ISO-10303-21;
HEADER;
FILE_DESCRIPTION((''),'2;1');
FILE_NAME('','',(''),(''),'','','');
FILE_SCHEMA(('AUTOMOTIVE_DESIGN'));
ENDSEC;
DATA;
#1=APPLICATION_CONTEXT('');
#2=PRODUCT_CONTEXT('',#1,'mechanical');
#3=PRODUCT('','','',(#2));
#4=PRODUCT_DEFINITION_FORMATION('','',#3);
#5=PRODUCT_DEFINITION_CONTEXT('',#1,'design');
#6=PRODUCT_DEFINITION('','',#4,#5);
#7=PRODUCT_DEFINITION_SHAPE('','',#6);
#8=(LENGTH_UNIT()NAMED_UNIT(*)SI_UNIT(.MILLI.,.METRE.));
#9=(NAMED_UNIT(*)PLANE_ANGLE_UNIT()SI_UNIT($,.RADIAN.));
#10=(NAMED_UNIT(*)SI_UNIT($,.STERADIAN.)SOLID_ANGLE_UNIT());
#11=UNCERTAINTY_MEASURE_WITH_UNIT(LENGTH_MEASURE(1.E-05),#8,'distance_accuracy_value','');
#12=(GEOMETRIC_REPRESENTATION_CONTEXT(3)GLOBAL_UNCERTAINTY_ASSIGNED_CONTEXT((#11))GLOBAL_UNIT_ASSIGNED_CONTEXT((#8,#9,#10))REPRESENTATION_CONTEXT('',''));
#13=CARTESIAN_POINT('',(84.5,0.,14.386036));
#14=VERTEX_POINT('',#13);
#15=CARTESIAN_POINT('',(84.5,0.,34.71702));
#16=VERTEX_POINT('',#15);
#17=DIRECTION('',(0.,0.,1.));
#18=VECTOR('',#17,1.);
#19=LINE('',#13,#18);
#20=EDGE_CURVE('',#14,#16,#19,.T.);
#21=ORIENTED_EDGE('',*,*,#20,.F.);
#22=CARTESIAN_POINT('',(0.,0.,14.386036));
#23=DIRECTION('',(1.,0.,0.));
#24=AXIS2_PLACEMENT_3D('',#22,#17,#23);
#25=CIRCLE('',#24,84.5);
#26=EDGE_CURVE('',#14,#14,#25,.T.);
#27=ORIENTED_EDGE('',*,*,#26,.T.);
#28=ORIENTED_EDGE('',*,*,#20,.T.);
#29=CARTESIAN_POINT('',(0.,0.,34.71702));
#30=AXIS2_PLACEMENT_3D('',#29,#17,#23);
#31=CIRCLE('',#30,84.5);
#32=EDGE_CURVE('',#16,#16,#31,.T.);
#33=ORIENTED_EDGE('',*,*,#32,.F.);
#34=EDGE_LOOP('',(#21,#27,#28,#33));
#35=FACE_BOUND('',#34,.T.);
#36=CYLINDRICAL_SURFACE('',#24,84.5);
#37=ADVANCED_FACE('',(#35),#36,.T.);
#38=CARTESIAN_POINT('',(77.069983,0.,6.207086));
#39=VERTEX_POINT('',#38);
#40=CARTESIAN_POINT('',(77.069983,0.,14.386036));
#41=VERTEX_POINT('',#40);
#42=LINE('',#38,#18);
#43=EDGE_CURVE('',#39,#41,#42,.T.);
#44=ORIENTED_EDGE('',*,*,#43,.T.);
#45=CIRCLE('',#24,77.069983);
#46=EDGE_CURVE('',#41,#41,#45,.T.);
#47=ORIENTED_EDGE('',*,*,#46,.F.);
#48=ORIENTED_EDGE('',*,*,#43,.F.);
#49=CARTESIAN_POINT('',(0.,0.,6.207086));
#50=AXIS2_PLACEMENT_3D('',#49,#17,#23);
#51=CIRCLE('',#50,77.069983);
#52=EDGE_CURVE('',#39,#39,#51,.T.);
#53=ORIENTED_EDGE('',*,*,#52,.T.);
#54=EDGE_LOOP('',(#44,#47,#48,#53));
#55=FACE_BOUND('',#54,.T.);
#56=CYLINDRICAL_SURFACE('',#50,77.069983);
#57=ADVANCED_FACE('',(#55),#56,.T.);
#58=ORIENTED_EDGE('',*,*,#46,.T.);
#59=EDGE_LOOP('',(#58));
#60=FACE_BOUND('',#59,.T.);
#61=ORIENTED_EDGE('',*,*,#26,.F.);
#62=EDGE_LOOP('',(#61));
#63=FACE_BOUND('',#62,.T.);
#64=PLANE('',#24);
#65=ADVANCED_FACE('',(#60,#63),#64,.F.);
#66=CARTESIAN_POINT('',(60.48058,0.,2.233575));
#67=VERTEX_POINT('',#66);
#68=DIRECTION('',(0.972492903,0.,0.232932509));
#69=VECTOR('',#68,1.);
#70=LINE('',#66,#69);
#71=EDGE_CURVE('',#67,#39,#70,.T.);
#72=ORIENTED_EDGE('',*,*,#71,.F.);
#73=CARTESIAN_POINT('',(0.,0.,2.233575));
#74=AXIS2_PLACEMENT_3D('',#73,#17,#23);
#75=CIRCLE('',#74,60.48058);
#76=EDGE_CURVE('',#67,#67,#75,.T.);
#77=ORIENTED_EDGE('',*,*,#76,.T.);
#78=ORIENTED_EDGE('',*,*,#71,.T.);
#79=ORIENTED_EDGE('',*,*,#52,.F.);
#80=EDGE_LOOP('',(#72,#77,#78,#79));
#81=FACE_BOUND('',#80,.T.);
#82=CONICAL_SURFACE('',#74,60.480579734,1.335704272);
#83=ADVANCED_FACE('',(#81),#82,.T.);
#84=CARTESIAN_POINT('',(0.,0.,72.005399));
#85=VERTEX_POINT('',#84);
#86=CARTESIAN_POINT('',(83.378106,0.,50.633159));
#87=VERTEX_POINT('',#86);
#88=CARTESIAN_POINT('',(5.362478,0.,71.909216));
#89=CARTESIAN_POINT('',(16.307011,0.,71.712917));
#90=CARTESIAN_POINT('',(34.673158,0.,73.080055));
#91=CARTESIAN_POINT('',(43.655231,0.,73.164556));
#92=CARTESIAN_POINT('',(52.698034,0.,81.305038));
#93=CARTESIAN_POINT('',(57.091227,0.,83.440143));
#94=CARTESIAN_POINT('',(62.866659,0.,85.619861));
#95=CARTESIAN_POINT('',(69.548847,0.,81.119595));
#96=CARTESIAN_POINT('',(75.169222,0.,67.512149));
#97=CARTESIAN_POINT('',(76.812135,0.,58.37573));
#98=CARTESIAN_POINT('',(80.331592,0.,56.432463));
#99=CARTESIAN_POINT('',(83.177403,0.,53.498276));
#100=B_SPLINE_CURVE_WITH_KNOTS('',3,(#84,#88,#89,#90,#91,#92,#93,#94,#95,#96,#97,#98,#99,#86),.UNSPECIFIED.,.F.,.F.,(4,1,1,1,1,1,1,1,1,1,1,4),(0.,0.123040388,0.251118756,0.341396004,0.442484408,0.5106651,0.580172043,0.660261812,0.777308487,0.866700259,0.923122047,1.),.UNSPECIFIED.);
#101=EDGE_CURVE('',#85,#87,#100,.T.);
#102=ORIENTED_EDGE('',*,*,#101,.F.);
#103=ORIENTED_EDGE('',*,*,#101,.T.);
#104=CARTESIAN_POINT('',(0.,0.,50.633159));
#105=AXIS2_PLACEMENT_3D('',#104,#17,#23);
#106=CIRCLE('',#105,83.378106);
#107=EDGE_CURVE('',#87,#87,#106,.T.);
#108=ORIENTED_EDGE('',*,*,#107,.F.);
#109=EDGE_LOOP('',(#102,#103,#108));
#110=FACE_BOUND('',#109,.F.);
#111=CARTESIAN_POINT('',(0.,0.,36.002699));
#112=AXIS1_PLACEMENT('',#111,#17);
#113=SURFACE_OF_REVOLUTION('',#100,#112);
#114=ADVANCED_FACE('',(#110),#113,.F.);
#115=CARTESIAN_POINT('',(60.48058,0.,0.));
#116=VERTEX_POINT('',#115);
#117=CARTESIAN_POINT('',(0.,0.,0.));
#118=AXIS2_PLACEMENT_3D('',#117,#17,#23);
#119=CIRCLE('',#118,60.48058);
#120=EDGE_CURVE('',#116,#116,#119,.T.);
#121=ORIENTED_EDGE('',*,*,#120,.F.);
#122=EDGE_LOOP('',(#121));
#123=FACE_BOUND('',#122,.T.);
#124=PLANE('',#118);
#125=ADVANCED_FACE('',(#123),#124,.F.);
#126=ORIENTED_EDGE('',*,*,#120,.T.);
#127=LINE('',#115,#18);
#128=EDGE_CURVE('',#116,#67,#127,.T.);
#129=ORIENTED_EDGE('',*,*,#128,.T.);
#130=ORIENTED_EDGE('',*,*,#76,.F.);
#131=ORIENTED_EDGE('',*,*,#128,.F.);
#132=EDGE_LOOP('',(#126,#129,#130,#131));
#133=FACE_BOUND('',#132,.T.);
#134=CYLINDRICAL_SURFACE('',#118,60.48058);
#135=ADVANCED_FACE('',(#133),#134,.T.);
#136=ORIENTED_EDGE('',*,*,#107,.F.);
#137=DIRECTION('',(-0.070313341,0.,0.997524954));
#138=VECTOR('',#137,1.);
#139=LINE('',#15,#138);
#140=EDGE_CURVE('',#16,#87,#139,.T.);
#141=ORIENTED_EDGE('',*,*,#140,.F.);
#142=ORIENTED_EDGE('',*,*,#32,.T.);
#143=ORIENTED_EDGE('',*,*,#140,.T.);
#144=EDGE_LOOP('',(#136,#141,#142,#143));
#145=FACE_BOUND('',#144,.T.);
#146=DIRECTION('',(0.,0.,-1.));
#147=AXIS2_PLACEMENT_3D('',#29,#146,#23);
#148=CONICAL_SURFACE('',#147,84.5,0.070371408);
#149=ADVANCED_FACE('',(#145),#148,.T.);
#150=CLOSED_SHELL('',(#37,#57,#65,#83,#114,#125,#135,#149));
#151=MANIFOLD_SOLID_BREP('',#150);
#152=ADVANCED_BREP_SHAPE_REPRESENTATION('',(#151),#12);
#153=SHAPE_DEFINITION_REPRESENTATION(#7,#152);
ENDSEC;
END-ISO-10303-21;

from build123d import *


with BuildPart() as f1:
    # F0 (on Front) → F1 (revolve)
    with BuildSketch(Plane.XZ):
        with BuildLine():
            Line((0, 72.0053985715), (0, 0))
            Line((0, 0), (60.4805797338, 0))
            Line((60.4805797338, 0), (60.4805797338, 2.2335746326))
            Line((60.4805797338, 2.2335746326), (77.0699828863, 6.2070856802))
            Line((77.0699828863, 6.2070856802), (77.0699828863, 14.3860364848))
            Line((77.0699828863, 14.3860364848), (84.5, 14.3860364848))
            Line((84.5, 14.3860364848), (84.5, 34.7170196474))
            Line((84.5, 34.7170196474), (83.3781063557, 50.6331585348))
            add(Edge.make_bspline(
                [(0, 72.0053985715), (5.3624783169, 71.9092158768), (16.3070110762, 71.7129166497), (34.6731579332, 73.0800545991), (43.6552311193, 73.1645561389), (52.6980338602, 81.305037743), (57.0912268293, 83.4401429499), (62.866659385, 85.6198608303), (69.5488472767, 81.1195946469), (75.1692218019, 67.5121489578), (76.8121350319, 58.3757299789), (80.3315916954, 56.4324627805), (83.1774026155, 53.498275578), (83.3781063557, 50.6331585348)],
                knots=[0, 0, 0, 0, 0.1230403877, 0.2511187559, 0.3413960041, 0.4424844079, 0.5106651004, 0.5801720432, 0.6602618119, 0.7773084872, 0.8667002588, 0.923122047, 1, 1, 1, 1], degree=3))
        make_face()
    revolve(axis=Axis((0, 0, 36.0026992857), (0, 0, 1)))


solid = f1.part
